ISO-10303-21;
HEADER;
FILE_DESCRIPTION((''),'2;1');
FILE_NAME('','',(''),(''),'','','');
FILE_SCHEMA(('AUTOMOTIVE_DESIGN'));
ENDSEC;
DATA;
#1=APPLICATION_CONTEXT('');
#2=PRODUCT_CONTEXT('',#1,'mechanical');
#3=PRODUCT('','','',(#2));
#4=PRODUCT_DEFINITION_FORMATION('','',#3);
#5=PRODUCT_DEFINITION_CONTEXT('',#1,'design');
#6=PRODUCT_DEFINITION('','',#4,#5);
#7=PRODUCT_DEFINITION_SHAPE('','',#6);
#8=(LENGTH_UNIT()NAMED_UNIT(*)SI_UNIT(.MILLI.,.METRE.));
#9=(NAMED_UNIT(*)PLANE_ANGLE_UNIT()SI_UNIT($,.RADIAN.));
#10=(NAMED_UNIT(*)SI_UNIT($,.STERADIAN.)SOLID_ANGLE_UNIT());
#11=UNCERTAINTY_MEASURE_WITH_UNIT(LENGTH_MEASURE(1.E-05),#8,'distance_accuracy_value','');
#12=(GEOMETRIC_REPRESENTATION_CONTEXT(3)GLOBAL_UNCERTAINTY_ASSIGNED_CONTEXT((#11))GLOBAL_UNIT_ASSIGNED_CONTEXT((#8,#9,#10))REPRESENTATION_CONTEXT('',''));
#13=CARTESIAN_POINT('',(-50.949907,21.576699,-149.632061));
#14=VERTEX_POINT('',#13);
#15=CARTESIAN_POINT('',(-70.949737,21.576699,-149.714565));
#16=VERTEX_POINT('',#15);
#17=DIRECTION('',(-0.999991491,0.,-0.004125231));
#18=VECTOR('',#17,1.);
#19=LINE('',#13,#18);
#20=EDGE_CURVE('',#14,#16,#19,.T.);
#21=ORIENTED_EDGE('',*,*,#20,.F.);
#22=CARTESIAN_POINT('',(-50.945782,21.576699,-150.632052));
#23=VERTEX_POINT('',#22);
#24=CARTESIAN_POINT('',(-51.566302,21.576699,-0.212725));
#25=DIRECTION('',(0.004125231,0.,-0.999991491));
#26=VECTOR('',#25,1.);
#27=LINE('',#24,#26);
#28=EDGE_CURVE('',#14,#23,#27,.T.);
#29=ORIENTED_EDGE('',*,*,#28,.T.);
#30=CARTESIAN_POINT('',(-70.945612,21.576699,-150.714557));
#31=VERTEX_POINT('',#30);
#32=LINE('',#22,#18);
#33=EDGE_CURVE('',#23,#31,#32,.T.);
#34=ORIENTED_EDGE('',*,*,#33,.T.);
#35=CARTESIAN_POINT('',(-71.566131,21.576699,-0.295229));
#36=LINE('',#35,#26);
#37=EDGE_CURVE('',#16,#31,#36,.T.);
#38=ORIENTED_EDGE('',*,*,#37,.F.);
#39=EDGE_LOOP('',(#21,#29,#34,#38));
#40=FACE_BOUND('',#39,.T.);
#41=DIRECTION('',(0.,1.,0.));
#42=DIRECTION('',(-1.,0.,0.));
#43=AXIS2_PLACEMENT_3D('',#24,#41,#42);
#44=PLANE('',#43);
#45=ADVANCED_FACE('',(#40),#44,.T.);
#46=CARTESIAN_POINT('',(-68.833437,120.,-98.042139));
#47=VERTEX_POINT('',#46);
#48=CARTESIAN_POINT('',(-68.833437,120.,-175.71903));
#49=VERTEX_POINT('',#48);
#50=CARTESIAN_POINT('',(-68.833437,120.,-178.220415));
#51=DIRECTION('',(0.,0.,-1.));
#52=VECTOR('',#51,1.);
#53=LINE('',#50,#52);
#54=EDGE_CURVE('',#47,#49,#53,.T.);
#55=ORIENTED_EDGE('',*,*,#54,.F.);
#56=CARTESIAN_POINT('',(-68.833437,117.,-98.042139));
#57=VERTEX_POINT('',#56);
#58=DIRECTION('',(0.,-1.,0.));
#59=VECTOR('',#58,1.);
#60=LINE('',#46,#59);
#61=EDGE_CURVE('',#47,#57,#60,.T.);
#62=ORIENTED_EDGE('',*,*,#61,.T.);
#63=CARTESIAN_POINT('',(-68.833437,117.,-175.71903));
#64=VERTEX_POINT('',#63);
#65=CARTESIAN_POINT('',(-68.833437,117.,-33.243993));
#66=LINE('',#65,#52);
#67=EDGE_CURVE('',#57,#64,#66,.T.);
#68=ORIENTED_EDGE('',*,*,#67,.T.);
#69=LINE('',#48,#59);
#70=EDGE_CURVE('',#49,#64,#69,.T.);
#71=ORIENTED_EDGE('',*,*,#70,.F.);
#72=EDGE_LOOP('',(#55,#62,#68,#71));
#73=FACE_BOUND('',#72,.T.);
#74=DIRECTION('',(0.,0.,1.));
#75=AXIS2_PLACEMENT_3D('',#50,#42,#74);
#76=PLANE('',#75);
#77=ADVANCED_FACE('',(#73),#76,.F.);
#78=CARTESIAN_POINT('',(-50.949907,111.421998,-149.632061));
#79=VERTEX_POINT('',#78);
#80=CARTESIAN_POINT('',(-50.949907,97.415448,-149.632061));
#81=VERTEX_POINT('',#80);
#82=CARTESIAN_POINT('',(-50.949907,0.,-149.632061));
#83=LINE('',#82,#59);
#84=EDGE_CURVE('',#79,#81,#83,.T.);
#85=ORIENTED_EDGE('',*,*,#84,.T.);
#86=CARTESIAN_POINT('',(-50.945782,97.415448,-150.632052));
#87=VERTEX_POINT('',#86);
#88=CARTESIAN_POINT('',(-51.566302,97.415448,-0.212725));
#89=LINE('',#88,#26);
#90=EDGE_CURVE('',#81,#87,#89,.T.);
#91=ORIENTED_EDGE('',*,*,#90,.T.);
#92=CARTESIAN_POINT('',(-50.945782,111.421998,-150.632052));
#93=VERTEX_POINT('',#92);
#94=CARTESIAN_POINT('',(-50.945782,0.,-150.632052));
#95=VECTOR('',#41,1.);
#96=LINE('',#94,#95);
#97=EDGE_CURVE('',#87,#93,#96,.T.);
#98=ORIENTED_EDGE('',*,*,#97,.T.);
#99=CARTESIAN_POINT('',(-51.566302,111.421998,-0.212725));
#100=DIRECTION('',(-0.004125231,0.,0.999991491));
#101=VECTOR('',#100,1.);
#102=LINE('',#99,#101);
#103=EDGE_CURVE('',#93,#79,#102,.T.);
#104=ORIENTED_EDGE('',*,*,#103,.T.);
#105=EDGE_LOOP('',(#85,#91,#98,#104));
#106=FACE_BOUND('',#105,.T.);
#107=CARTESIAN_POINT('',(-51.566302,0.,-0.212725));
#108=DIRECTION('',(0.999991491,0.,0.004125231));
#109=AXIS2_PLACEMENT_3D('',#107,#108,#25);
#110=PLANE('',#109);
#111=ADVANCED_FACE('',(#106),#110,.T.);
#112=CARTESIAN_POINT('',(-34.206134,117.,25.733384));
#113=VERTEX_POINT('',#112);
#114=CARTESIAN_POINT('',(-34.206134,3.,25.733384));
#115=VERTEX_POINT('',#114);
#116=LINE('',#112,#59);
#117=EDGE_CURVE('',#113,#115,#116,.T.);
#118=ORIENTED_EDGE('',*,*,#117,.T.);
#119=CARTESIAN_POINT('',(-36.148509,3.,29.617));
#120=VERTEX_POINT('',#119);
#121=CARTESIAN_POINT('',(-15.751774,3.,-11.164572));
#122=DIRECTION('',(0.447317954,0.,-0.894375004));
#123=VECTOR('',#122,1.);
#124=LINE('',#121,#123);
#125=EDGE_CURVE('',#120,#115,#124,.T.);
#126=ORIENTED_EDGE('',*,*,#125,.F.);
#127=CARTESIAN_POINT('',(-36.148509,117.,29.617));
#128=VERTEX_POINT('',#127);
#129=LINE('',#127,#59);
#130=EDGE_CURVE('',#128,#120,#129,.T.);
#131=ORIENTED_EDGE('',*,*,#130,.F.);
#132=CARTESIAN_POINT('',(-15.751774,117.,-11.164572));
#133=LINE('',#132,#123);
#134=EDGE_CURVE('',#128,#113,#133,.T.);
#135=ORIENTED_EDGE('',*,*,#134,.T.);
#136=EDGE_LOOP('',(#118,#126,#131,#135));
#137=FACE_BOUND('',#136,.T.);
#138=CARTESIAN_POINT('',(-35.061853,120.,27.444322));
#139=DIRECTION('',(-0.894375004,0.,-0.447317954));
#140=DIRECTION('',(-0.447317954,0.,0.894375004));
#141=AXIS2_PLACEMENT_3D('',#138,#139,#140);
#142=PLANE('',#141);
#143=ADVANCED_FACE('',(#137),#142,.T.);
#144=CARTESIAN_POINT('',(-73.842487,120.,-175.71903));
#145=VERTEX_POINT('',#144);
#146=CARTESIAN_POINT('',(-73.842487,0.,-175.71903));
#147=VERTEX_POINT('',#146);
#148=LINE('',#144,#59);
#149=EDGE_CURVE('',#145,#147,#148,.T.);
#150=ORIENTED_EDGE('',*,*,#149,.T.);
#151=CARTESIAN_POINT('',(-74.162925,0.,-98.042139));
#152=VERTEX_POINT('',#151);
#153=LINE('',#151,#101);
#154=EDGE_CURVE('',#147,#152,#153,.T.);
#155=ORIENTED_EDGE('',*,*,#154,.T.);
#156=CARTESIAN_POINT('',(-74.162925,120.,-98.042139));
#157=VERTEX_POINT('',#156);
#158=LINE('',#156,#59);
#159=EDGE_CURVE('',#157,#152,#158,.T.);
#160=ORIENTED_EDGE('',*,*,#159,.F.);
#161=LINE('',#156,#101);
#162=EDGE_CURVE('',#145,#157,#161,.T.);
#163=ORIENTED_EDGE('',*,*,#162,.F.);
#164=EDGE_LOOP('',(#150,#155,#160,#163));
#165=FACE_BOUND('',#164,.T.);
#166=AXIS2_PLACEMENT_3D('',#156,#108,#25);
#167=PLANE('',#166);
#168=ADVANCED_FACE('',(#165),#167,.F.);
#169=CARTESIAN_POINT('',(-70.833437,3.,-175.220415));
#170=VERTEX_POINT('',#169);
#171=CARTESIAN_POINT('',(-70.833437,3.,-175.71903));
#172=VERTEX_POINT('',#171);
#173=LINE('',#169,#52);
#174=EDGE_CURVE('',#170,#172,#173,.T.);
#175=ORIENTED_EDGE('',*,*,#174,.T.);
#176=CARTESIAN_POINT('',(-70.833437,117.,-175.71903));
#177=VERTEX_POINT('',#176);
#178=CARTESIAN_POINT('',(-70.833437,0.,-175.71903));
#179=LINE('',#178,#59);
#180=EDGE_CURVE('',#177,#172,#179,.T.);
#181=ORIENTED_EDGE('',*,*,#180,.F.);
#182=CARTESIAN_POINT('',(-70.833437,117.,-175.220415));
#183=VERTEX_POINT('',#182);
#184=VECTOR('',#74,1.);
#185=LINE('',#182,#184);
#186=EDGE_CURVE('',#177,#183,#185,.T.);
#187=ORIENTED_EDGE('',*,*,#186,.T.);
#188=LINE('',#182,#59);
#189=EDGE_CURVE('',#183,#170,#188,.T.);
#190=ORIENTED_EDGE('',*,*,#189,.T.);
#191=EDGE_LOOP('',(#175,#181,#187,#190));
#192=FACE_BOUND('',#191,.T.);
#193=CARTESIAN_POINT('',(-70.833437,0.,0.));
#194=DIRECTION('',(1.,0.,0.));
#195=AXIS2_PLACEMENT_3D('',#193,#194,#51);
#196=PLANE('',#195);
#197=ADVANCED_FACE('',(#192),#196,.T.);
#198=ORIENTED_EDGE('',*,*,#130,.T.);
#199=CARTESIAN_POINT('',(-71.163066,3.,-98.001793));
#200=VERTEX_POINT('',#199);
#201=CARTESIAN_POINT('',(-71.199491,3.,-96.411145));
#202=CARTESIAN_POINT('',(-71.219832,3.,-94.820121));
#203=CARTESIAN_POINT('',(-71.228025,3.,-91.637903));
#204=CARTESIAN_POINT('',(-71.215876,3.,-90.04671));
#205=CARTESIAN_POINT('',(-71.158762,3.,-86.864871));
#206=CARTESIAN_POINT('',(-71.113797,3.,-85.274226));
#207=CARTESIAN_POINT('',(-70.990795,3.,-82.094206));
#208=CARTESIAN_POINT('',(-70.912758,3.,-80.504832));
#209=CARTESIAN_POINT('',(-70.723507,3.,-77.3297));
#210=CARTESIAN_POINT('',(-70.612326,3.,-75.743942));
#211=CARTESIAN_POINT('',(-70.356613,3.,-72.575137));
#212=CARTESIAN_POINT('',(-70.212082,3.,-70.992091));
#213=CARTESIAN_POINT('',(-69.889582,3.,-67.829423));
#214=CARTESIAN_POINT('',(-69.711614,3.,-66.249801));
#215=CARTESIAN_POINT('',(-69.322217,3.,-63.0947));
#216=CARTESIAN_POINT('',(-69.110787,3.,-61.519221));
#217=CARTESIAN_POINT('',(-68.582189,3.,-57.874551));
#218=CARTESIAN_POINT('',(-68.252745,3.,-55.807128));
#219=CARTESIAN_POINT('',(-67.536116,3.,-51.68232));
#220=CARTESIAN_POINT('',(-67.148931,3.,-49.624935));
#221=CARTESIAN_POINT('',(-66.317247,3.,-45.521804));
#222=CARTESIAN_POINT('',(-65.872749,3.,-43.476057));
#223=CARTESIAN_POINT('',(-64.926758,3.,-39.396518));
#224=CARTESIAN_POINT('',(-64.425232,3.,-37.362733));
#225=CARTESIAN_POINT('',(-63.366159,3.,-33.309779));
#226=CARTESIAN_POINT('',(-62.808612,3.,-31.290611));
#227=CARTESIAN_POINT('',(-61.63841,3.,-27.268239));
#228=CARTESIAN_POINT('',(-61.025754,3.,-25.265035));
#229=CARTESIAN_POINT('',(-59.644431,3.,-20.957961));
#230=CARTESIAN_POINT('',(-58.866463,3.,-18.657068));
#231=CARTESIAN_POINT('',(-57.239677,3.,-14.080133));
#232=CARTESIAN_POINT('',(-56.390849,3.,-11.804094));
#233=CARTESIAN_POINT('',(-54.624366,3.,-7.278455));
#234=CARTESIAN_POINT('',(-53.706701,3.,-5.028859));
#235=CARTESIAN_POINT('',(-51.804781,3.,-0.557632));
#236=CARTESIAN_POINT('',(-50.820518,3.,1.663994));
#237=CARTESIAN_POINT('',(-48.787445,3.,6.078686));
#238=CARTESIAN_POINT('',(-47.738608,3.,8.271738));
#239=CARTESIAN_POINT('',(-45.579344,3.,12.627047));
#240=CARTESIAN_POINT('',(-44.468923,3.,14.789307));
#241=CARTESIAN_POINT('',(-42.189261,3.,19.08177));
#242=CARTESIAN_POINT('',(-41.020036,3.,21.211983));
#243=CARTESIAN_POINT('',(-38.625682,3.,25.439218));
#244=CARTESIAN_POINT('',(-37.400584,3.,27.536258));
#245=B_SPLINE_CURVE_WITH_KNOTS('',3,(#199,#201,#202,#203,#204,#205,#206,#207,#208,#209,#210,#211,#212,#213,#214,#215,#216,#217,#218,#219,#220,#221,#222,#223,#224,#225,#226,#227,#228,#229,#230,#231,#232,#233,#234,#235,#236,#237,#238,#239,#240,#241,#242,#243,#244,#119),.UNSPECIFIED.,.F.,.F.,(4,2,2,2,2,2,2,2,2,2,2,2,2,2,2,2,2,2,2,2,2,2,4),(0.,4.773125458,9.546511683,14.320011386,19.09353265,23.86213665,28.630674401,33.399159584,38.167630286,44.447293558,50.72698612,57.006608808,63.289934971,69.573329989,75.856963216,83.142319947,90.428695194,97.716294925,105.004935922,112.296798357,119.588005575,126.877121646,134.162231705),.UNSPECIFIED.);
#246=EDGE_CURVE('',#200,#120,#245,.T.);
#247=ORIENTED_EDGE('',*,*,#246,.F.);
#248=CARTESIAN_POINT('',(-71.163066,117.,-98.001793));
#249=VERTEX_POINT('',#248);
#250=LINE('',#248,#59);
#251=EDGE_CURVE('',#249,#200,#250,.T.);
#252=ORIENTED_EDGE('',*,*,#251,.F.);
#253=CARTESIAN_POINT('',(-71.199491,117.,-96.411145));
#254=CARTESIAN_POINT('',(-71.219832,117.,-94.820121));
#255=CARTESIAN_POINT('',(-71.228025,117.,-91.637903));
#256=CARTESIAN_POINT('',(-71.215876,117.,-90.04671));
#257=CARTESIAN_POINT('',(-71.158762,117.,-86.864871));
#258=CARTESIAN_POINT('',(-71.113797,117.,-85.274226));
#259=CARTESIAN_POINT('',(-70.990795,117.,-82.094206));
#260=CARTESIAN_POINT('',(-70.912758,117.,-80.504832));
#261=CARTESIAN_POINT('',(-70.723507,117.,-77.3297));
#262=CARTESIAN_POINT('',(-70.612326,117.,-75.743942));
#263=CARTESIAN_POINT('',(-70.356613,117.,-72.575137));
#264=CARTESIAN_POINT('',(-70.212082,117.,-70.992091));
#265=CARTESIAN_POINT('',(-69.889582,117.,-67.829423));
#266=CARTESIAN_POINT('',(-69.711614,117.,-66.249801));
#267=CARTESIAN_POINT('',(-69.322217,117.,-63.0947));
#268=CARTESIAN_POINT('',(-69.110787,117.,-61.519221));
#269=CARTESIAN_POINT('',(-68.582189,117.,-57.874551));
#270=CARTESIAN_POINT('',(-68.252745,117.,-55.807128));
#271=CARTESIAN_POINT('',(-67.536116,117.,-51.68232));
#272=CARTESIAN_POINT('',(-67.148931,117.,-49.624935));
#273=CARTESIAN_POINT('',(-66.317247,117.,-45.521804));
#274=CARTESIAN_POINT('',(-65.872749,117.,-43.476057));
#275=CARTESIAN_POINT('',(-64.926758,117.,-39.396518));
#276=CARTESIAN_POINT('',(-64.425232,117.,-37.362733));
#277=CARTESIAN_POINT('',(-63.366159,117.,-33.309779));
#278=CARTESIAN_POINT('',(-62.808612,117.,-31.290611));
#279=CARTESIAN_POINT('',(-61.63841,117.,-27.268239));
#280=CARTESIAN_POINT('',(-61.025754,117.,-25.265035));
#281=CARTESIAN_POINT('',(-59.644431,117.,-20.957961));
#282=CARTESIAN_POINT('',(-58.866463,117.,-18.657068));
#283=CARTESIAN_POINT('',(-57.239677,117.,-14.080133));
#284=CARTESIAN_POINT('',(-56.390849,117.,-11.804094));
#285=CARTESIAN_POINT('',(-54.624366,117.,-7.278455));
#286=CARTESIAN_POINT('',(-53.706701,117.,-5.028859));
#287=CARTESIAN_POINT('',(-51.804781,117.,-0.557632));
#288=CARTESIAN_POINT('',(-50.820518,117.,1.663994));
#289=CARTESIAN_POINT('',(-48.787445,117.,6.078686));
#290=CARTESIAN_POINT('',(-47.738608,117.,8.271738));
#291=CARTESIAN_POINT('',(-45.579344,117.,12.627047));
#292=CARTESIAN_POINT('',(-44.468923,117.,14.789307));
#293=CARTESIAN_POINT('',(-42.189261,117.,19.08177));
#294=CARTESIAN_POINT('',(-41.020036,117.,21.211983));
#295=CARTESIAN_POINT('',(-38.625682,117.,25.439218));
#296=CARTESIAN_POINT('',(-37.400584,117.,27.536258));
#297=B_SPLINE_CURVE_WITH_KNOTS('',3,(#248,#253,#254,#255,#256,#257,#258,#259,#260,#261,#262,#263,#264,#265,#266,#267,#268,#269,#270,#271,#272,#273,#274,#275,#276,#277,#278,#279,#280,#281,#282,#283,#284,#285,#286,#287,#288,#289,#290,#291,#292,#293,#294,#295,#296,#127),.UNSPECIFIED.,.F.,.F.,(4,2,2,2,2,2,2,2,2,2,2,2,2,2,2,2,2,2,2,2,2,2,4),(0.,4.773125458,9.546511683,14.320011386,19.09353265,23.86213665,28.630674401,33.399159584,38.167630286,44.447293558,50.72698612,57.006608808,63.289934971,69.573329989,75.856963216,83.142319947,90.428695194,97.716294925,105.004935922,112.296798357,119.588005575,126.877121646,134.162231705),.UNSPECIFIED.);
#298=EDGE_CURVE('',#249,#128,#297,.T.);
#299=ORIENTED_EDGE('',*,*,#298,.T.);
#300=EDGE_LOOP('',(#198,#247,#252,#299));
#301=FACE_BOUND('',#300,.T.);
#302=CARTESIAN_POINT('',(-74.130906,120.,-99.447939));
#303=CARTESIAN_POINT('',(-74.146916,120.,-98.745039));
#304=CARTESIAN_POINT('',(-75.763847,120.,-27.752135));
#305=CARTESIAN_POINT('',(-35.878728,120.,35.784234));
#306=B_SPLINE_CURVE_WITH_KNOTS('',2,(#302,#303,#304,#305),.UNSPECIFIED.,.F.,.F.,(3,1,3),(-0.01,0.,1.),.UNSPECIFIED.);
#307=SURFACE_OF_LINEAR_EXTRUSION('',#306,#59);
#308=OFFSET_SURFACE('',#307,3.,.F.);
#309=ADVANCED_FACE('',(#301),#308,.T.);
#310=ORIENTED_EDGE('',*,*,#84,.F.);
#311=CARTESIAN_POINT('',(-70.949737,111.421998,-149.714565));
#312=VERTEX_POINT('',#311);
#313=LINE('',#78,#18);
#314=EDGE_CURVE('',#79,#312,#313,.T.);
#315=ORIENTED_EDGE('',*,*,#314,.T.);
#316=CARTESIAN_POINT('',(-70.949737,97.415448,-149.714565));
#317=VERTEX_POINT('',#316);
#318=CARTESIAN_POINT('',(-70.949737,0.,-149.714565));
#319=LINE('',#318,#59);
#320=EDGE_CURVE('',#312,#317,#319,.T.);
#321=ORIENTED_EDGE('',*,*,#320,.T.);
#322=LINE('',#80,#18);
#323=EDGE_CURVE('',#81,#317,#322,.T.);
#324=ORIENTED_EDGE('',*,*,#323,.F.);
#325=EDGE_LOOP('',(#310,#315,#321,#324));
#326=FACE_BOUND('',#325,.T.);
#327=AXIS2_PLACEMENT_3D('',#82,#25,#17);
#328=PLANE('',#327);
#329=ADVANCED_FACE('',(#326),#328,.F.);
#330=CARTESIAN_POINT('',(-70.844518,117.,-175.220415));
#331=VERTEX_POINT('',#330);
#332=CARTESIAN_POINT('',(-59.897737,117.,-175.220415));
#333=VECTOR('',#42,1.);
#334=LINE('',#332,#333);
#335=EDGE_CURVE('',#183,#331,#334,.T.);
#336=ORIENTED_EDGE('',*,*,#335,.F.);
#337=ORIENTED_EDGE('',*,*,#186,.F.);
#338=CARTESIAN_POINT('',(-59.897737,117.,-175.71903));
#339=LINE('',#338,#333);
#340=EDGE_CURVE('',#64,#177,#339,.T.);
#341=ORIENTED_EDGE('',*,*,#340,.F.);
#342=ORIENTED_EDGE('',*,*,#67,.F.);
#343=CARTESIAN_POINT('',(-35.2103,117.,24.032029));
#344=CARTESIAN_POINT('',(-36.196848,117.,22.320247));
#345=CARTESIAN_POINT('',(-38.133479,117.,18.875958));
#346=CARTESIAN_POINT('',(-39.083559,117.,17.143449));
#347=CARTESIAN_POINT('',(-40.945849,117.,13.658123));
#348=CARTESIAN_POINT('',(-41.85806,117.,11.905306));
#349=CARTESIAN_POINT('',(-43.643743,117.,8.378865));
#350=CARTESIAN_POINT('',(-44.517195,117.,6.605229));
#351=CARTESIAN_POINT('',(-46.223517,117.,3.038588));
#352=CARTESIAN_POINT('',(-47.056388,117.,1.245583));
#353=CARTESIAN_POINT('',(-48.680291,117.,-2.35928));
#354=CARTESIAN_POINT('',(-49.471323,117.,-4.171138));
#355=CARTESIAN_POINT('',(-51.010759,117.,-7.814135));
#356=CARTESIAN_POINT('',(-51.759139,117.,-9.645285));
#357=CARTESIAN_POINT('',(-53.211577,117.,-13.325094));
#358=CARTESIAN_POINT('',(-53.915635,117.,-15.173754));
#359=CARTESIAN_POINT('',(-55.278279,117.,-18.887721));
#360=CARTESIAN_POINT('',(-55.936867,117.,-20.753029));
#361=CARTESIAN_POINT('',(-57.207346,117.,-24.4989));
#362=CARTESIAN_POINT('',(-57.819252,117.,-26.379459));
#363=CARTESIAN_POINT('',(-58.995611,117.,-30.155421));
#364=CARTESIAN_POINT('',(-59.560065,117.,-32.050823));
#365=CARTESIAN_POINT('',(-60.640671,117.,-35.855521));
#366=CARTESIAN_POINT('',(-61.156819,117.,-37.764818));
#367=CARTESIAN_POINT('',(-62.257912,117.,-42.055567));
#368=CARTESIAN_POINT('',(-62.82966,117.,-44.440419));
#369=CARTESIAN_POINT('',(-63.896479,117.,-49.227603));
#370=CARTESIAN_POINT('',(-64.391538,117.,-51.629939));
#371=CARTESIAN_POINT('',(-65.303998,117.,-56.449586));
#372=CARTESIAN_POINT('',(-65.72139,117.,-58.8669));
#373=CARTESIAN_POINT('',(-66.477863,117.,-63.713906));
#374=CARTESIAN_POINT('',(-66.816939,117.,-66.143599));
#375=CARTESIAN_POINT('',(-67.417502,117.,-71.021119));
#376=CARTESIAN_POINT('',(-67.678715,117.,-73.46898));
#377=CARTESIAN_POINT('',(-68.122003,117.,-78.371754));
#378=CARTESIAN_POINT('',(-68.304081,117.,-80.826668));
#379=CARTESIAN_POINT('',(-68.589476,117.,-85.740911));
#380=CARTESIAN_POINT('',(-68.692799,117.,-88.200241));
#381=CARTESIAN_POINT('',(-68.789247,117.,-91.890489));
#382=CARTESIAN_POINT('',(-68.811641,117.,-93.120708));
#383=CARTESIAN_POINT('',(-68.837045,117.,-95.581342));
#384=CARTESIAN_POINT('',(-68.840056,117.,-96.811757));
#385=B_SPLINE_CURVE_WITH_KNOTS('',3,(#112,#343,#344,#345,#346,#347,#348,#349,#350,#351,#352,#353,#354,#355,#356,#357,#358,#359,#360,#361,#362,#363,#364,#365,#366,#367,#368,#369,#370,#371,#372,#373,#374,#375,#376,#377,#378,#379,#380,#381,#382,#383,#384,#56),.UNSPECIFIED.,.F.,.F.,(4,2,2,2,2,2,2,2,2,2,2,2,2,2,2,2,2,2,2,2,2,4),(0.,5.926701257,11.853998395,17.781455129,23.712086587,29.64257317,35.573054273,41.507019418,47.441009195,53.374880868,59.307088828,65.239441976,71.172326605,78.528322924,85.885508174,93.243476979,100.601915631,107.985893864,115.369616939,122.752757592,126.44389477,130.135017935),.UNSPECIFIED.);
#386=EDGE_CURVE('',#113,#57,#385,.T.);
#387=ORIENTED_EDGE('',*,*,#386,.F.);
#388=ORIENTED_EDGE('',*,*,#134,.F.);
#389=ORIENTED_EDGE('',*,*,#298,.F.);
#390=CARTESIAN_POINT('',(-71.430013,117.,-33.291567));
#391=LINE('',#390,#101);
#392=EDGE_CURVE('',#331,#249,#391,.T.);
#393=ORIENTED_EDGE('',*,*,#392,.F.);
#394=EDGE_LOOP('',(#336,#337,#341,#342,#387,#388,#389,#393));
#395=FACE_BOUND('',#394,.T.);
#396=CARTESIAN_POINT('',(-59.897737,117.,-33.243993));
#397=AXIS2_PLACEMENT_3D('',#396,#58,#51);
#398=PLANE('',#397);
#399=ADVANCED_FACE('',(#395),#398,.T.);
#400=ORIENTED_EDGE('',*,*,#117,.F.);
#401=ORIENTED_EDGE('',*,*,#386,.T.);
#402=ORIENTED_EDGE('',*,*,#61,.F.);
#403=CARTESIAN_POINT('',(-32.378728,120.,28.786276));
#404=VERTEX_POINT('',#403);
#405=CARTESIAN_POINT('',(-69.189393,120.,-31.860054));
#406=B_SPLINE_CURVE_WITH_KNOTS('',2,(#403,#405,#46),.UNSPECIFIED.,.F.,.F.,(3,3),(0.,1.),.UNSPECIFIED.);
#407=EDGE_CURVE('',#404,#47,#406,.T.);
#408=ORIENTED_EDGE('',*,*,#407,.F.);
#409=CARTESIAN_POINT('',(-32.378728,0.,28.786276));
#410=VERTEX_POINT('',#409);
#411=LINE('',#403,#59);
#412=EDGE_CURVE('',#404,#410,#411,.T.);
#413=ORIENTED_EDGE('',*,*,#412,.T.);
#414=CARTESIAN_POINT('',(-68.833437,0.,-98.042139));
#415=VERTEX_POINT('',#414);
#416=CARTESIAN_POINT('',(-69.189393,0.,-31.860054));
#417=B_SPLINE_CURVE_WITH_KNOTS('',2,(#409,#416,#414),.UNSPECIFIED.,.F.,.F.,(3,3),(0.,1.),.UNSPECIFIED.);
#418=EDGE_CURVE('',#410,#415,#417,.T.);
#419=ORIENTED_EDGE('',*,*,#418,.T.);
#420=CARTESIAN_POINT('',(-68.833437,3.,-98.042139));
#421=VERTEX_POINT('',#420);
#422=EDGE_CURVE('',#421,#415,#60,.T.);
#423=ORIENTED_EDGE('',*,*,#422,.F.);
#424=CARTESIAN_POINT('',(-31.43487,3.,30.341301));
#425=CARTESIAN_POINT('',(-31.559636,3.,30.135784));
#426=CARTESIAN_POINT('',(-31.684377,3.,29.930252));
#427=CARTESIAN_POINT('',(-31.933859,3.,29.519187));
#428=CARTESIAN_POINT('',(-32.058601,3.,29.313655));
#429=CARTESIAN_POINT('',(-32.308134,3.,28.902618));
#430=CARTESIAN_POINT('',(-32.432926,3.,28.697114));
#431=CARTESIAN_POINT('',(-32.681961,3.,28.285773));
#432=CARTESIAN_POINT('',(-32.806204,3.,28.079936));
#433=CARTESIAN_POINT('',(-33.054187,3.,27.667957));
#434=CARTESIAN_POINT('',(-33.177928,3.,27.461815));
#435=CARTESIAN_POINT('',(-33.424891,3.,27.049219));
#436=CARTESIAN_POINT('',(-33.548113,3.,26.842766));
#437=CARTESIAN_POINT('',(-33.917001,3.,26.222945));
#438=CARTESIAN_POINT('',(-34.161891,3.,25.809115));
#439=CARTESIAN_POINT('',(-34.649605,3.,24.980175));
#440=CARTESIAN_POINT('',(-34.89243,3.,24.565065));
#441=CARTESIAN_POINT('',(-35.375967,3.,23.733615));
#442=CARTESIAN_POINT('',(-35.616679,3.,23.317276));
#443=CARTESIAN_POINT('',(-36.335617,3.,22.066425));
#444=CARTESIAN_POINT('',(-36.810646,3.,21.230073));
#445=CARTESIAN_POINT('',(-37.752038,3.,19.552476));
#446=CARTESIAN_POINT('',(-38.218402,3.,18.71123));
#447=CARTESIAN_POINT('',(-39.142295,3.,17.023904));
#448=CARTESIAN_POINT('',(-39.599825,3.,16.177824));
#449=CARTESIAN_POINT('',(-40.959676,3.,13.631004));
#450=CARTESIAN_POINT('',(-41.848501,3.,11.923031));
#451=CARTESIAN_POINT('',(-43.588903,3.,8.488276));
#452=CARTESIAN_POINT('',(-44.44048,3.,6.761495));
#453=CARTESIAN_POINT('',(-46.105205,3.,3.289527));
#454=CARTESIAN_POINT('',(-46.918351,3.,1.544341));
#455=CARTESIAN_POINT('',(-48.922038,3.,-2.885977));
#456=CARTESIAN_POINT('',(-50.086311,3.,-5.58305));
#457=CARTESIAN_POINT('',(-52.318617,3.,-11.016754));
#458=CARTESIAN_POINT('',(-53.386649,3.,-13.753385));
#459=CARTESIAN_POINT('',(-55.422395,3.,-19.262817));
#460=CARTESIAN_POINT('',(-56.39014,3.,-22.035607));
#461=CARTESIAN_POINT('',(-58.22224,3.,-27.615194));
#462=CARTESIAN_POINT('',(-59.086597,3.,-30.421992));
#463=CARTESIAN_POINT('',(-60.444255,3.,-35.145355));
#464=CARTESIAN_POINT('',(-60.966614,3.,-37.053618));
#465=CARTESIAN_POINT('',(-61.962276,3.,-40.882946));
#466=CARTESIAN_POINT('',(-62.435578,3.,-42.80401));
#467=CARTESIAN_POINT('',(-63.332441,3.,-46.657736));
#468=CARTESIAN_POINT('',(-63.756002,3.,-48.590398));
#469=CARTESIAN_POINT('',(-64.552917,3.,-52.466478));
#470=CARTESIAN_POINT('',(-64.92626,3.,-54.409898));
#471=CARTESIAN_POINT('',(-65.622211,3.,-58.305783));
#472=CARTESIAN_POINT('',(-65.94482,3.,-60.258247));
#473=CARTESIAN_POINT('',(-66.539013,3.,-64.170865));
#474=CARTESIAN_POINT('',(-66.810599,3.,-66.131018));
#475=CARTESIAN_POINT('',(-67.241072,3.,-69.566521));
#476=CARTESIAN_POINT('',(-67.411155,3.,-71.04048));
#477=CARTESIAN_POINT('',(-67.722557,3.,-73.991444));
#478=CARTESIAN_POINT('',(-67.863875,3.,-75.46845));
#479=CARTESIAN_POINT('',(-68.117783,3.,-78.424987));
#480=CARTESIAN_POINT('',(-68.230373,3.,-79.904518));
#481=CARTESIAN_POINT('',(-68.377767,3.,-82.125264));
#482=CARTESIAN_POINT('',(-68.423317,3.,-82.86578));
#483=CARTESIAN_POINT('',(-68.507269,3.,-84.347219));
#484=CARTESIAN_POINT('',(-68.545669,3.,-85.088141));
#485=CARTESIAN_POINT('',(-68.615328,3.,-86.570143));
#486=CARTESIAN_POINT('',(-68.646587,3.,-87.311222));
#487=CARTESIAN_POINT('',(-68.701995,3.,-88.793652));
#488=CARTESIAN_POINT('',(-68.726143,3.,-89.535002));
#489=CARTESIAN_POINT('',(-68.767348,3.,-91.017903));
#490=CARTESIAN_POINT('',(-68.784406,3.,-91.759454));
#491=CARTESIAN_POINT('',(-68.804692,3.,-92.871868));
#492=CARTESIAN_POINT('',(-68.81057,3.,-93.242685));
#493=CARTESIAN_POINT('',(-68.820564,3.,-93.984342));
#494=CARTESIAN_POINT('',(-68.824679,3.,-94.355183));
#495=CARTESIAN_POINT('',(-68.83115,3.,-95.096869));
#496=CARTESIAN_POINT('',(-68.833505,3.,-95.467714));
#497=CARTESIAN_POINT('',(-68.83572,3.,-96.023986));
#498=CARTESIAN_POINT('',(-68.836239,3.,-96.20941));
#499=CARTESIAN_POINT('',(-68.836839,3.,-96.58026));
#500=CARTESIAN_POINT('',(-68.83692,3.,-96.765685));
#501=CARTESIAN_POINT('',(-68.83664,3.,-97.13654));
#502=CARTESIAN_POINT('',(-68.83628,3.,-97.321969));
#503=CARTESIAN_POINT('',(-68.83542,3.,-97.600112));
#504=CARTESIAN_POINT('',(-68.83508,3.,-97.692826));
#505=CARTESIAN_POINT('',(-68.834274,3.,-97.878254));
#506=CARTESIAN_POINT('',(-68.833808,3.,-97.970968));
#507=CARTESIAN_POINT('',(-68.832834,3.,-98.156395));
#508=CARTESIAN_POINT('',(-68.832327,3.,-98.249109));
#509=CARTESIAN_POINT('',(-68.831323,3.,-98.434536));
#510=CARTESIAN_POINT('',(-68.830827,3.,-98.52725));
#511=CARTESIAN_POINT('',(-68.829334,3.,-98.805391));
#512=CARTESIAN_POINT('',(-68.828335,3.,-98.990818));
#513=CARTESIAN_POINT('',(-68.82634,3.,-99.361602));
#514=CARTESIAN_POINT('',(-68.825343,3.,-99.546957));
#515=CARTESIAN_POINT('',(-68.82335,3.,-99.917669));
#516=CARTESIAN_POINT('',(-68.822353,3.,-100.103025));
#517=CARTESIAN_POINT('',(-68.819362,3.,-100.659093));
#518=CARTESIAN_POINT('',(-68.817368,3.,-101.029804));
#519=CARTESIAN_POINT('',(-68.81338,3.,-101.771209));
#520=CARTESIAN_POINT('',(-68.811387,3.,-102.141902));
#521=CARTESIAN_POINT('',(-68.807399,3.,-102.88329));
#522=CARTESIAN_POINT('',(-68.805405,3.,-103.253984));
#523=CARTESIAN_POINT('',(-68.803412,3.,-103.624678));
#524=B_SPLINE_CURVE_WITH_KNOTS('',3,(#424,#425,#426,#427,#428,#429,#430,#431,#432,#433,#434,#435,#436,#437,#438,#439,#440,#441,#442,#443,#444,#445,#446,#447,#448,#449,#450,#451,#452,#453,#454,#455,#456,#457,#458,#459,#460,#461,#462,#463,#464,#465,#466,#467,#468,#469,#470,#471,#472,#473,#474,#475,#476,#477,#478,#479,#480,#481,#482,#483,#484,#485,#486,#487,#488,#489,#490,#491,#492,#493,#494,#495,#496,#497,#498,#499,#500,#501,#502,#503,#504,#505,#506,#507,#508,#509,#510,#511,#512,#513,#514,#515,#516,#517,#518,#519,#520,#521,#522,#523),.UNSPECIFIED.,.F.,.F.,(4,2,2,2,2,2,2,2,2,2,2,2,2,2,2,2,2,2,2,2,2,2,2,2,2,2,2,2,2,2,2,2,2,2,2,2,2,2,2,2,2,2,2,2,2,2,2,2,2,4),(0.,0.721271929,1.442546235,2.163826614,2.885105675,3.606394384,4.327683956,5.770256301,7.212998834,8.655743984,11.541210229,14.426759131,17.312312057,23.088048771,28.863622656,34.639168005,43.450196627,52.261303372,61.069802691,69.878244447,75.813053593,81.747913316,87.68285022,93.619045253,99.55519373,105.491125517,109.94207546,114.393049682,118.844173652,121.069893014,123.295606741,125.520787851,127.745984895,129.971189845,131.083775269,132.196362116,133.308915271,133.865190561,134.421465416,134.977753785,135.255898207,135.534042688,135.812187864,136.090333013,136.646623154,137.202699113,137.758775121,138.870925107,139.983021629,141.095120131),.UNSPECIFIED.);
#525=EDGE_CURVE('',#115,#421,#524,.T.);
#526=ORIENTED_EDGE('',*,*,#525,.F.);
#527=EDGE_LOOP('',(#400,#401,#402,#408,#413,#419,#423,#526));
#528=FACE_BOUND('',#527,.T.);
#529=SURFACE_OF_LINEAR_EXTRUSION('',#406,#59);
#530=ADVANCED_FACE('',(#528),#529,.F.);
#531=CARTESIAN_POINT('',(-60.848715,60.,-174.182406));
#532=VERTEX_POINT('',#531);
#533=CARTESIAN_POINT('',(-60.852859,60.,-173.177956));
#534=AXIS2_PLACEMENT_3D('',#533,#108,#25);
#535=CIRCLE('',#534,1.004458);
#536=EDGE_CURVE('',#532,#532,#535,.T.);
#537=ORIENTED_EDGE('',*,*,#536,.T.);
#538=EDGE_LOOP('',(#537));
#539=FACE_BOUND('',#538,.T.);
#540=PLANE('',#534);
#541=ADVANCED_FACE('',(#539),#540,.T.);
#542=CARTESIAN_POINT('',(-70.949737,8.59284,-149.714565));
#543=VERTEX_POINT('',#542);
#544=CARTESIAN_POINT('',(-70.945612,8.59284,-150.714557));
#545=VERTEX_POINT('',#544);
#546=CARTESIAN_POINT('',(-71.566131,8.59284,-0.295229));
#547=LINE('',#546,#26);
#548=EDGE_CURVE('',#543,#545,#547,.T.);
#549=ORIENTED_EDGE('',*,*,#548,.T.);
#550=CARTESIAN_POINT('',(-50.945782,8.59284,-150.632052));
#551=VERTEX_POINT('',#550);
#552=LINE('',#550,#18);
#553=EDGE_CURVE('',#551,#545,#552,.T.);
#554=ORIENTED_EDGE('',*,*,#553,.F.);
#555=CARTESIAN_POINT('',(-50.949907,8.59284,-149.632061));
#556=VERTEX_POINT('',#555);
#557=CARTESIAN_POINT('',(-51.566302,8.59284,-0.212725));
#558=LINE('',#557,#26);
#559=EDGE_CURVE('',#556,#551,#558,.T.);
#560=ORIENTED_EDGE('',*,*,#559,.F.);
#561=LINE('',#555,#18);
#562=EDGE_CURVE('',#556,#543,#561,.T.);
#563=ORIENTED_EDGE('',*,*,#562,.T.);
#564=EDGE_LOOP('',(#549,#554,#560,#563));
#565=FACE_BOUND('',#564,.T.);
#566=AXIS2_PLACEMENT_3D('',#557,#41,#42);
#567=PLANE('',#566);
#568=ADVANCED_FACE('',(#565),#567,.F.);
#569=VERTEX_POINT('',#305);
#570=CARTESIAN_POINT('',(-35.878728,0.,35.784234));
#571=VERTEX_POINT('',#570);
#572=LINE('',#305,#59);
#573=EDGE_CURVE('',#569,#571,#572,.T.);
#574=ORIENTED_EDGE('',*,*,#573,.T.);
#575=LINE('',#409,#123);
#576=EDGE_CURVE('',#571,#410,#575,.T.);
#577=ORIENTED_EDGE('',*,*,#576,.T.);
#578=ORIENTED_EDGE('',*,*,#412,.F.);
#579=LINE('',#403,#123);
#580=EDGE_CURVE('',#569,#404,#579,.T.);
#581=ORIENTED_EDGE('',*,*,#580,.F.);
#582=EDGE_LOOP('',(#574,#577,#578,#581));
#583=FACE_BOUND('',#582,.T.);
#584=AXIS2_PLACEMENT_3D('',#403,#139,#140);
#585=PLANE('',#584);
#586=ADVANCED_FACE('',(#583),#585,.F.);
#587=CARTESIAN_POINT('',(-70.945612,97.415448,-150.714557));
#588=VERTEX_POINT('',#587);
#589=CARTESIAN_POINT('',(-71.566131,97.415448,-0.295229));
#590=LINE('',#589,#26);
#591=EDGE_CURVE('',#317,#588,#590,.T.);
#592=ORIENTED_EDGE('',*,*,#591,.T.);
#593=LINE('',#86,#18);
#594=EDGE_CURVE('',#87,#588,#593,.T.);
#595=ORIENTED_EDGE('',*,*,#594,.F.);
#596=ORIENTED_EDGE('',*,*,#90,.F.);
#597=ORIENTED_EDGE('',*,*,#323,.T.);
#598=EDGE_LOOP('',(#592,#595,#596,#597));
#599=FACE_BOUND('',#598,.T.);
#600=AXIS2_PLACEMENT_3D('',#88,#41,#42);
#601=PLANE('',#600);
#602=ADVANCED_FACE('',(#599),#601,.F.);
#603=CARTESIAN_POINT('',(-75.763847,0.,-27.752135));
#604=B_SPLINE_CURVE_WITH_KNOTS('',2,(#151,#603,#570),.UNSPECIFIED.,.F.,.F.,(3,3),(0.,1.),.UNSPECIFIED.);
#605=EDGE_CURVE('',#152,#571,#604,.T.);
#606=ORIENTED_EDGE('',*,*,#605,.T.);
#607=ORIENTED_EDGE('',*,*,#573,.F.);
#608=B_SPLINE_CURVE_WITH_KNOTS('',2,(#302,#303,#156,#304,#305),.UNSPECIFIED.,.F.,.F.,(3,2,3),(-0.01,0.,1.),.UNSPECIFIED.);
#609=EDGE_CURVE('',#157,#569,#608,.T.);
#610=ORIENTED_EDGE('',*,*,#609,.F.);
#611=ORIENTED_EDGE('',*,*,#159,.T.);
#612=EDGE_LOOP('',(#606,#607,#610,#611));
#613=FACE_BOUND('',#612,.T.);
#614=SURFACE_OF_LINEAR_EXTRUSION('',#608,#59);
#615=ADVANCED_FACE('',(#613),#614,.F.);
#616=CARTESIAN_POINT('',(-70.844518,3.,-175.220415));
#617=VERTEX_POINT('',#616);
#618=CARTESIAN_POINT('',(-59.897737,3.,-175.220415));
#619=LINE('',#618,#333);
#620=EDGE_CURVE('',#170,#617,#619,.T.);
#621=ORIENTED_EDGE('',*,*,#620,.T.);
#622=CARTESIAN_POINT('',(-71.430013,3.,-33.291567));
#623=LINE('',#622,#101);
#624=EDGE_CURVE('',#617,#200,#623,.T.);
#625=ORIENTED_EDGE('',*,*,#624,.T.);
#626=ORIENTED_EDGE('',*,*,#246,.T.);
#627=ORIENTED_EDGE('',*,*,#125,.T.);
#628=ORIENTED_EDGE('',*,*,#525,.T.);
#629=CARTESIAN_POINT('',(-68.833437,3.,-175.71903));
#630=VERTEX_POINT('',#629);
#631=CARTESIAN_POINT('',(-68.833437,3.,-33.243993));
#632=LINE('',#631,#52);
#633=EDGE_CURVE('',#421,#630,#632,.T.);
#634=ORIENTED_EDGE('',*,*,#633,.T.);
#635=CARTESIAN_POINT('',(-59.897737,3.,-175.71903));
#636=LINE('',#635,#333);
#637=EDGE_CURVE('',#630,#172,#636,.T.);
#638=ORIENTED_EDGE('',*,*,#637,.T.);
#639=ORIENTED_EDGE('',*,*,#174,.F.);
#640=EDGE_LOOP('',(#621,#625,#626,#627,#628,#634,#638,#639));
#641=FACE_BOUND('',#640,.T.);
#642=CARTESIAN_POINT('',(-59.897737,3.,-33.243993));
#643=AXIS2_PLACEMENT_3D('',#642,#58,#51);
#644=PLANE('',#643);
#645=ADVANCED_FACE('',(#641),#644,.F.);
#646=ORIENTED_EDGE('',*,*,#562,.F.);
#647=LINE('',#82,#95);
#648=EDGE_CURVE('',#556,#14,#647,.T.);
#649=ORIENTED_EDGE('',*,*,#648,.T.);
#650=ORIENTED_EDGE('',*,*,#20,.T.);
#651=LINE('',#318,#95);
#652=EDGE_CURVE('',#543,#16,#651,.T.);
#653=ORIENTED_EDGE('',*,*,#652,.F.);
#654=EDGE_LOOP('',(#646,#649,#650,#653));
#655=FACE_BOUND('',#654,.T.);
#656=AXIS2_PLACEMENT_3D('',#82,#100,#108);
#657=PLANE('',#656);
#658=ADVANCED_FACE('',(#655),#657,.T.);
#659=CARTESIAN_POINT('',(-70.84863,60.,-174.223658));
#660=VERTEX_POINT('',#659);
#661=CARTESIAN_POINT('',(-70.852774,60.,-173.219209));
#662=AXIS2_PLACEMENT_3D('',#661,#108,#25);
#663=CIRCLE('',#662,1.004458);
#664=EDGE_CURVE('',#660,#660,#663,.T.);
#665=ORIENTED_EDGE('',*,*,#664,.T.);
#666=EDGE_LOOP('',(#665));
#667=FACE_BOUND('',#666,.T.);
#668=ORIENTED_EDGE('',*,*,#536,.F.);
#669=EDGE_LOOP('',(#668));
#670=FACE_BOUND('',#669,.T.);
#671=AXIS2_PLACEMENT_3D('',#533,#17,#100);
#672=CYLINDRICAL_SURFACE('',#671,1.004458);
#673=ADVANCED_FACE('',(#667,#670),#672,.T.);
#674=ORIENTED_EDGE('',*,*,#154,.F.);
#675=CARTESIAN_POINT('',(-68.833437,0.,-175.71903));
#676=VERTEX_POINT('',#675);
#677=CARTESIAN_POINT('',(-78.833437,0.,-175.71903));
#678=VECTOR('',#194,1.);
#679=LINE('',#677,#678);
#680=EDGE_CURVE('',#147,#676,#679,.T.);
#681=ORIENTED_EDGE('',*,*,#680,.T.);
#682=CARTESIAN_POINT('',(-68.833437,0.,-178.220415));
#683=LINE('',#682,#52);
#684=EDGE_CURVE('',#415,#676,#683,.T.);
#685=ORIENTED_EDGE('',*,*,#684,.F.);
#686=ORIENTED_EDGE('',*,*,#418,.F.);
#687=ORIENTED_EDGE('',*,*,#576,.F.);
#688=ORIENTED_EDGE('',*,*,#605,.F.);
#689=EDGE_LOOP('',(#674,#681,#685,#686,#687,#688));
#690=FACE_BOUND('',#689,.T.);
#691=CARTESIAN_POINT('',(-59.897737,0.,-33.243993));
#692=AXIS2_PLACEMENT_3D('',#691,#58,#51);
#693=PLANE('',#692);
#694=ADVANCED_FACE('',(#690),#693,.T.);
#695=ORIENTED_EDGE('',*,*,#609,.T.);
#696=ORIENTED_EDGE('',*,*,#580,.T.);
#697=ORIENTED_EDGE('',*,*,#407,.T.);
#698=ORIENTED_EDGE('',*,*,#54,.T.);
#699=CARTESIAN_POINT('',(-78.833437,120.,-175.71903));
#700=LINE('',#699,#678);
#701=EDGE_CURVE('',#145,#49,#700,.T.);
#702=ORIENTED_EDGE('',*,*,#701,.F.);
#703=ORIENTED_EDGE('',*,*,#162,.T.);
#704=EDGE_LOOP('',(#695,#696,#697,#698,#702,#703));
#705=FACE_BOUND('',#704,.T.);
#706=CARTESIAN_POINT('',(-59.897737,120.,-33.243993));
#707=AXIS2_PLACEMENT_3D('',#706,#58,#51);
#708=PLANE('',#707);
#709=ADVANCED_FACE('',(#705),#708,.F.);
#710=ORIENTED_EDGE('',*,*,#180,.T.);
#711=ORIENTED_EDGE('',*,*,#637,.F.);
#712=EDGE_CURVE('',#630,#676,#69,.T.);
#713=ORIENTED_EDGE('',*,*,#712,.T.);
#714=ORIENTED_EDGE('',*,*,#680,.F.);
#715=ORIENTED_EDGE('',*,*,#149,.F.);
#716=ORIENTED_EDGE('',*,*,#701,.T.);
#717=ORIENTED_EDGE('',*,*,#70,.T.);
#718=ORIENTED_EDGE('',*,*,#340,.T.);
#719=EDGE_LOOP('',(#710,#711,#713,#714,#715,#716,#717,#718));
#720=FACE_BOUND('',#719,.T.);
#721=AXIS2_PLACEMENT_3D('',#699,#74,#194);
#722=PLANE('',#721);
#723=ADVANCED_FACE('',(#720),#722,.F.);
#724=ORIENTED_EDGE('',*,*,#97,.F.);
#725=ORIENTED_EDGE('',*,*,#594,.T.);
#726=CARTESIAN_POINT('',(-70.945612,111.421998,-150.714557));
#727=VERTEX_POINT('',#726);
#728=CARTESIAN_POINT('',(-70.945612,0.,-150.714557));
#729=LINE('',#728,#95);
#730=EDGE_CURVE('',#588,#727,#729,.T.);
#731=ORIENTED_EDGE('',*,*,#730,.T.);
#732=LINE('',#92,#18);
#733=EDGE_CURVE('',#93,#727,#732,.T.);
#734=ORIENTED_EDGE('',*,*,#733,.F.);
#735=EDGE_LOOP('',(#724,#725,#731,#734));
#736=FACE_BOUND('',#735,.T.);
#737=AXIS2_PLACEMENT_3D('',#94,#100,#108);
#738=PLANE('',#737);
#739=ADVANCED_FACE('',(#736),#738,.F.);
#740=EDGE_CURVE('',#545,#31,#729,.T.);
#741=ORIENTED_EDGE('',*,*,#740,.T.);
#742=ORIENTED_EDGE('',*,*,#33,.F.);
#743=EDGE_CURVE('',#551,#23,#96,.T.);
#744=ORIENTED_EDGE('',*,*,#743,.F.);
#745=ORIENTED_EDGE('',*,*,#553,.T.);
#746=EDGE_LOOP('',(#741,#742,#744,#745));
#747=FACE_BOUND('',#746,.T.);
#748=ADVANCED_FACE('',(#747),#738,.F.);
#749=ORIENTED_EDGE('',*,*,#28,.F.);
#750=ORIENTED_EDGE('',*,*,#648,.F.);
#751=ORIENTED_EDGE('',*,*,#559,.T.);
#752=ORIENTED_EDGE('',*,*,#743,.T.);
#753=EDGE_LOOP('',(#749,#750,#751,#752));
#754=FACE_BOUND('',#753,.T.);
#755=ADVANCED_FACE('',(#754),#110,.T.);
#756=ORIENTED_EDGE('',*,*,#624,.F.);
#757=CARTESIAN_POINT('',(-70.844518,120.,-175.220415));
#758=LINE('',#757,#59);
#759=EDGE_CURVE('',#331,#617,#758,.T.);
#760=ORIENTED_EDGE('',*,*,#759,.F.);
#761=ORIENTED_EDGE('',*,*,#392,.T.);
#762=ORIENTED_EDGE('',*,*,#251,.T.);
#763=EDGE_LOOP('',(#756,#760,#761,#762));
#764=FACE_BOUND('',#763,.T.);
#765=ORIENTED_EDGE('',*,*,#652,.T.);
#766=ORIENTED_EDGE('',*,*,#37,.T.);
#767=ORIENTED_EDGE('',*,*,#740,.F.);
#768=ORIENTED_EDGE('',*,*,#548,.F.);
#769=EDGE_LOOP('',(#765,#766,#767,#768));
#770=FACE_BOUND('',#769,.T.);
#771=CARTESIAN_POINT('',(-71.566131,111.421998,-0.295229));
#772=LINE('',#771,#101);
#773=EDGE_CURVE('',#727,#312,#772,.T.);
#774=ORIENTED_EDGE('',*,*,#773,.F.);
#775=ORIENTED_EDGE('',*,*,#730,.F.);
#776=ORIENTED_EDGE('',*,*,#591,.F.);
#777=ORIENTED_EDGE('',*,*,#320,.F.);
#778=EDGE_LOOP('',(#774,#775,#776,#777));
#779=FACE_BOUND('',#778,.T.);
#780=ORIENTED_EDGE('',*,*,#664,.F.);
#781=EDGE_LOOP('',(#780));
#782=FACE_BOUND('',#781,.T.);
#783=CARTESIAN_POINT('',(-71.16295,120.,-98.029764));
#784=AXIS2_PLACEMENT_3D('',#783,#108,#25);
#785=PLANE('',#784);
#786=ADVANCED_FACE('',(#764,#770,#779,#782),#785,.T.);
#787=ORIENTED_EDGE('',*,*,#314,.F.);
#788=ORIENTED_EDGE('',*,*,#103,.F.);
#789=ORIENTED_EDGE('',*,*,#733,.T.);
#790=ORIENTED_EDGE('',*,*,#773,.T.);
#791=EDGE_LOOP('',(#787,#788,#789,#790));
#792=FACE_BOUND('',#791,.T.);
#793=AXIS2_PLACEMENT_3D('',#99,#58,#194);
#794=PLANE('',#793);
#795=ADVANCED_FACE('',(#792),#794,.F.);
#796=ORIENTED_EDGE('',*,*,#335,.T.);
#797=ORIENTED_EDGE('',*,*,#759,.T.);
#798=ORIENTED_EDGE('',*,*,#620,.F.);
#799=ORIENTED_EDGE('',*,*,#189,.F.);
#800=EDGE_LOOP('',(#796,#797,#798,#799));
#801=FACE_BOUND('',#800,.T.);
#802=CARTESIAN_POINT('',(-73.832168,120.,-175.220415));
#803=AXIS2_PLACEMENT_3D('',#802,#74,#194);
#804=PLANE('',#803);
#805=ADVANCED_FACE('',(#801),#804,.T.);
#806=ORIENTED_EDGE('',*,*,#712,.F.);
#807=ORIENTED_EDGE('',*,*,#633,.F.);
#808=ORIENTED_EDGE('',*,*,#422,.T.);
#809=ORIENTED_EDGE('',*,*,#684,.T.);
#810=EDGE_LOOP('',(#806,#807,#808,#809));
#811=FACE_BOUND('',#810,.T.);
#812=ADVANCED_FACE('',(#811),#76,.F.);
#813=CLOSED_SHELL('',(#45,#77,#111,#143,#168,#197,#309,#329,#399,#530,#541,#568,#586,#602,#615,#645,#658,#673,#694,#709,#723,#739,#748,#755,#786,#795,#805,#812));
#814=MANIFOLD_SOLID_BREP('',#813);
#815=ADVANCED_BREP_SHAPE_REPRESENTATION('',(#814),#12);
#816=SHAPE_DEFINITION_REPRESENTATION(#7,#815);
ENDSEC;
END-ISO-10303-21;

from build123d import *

# Parameters (mm, degrees)
BOSS_EXTRUDE1_DEPTH = 120
SHELL4_START        = 3
SHELL4_DEPTH        = 114
SKETCH12_W          = 3.498967662
SKETCH12_H          = 114
CUT_EXTRUDE5_DEPTH  = 2
SKETCH9_R           = 1.004458273
BOSS_EXTRUDE5_DEPTH = 10
CUT_EXTRUDE6_DEPTH  = 10
SKETCH14_W          = 1
SKETCH14_H          = 12.98385937
SKETCH14_H_2        = 14.006550136
BOSS_EXTRUDE6_DEPTH = 20


# Read off the part's stored shape, not the designer's step: Shell4
with BuildPart() as part:
    # Sketch1 → Boss-Extrude1 (new body)
    with BuildSketch(Plane(origin=(0, 0, 0), x_dir=(1, 0, 0), z_dir=(0, 1, 0))):
        with BuildLine():
            Line((-74.162924852, 98.042139327), (-73.832168128, 178.220414973))
            Line((-73.832168128, 178.220414973), (-68.833436902, 178.220414973))
            Line((-68.833436902, 178.220414973), (-68.833436902, 98.042139327))
            add(Edge.make_bspline(
                [(-68.833436902, 98.042139327), (-69.18939253, 31.860054141), (-32.378727908, -28.786275828)],
                knots=[0, 0, 0, 1, 1, 1], degree=2))
            Line((-32.378727908, -28.786275828), (-35.878727908, -35.78423441))
            add(Edge.make_bspline(
                [(-74.162924852, 98.042139327), (-75.763847477, 27.752135338), (-35.878727908, -35.78423441)],
                knots=[0, 0, 0, 1, 1, 1], degree=2))
        make_face()
    extrude(amount=BOSS_EXTRUDE1_DEPTH)

    # Shell4 outline → Shell4 (cut)
    with BuildSketch(Plane(origin=(0, 0, 0), x_dir=(1, 0, 0), z_dir=(0, 1, 0)).offset(SHELL4_START)):
        with BuildLine():
            Line((-70.8445184, 175.220414973), (-71.163065765, 98.001792885))
            add(Edge.make_bspline(
                [(-71.163065765, 98.001792885), (-71.16307999, 98.001168327), (-71.163094215, 98.000543769), (-71.16310844, 97.999919211), (-71.163122665, 97.999294653), (-71.16313689, 97.998670095), (-71.163151114, 97.998045537), (-71.163165339, 97.997420979), (-71.163179564, 97.996796421), (-71.163193789, 97.996171862), (-71.163208014, 97.995547304), (-71.163222239, 97.994922746), (-71.163236464, 97.994298188), (-71.163250689, 97.99367363), (-71.163293111, 97.991811054), (-71.163321308, 97.990573036), (-71.163349505, 97.989335018), (-71.163377702, 97.988097001), (-71.163405899, 97.986858982), (-71.163434097, 97.985620965), (-71.163462293, 97.984382945), (-71.163490491, 97.98314493), (-71.163518687, 97.98190691), (-71.163546885, 97.980668893), (-71.163575081, 97.979430874), (-71.163603278, 97.978192857), (-71.163631475, 97.976954838), (-71.163673771, 97.975097811), (-71.16368819, 97.974464701), (-71.163699727, 97.973958392), (-71.163723187, 97.972927066), (-71.163717996, 97.973159219), (-71.163755945, 97.971484687), (-71.163749131, 97.971794066), (-71.163775505, 97.970626161), (-71.163784451, 97.97023953), (-71.163799423, 97.969578445), (-71.163813375, 97.968966514), (-71.163827192, 97.968358956), (-71.163841117, 97.967746949), (-71.163868925, 97.96652446), (-71.163882828, 97.965913216), (-71.163896729, 97.965301972), (-71.163910628, 97.964690728), (-71.163924525, 97.964079485), (-71.163938422, 97.963468242), (-71.163952315, 97.962856999), (-71.163966208, 97.962245757), (-71.163980098, 97.961634515), (-71.163993987, 97.961023273), (-71.164007875, 97.960412031), (-71.16402176, 97.95980079), (-71.164035644, 97.959189549), (-71.164105055, 97.956133346), (-71.164160555, 97.953688388), (-71.16421603, 97.951243436), (-71.164271474, 97.948798484), (-71.164326897, 97.946353546), (-71.164382282, 97.943908598), (-71.164437654, 97.941463673), (-71.164492984, 97.939018734), (-71.164548299, 97.936573815), (-71.164603577, 97.93412889), (-71.164658834, 97.931683976), (-71.16471406, 97.929239064), (-71.16476926, 97.926794157), (-71.164934778, 97.919459451), (-71.165045014, 97.914569665), (-71.165155139, 97.909679898), (-71.165265157, 97.904790149), (-71.165375062, 97.899900419), (-71.165484862, 97.895010708), (-71.165594548, 97.890121015), (-71.165704128, 97.885231341), (-71.165813596, 97.880341685), (-71.165922956, 97.875452049), (-71.166032206, 97.87056243), (-71.166141347, 97.86567283), (-71.166250378, 97.860783249), (-71.166577142, 97.846114561), (-71.166794547, 97.83633551), (-71.167011514, 97.826556534), (-71.167228044, 97.816777632), (-71.167444133, 97.806998804), (-71.167659788, 97.797220051), (-71.167875001, 97.787441372), (-71.16808978, 97.777662768), (-71.168304117, 97.767884237), (-71.168518019, 97.758105782), (-71.168731482, 97.7483274), (-71.168944507, 97.738549093), (-71.169157093, 97.72877086), (-71.170217838, 97.679880069), (-71.171059425, 97.640768626), (-71.171894004, 97.601658372), (-71.172721576, 97.56254931), (-71.173542137, 97.523441433), (-71.174355694, 97.484334754), (-71.175162237, 97.445229255), (-71.175961779, 97.406124956), (-71.176754307, 97.367021836), (-71.177539831, 97.327919914), (-71.178318344, 97.288819177), (-71.179089851, 97.249719631), (-71.179854349, 97.210621274), (-71.183641802, 97.015135438), (-71.186559636, 96.858765798), (-71.189365345, 96.702415187), (-71.192058927, 96.546083598), (-71.194640389, 96.389771034), (-71.197109723, 96.233477481), (-71.199466944, 96.077202952), (-71.201712036, 95.920947426), (-71.203845018, 95.764710916), (-71.205865876, 95.608493406), (-71.207774621, 95.452294903), (-71.20957125, 95.296115396), (-71.211255765, 95.139954887), (-71.215972974, 94.671530339), (-71.21866933, 94.359323281), (-71.220917246, 94.047192171), (-71.222716731, 93.735136985), (-71.224067792, 93.423157694), (-71.224970441, 93.111254278), (-71.225424682, 92.799426705), (-71.22543053, 92.487674957), (-71.224987988, 92.175999001), (-71.224097069, 91.864398817), (-71.222757779, 91.552874376), (-71.220970129, 91.241425656), (-71.218734126, 90.930052628), (-71.210681088, 89.996160551), (-71.203519041, 89.373868515), (-71.194563692, 88.751878946), (-71.183815094, 88.130191631), (-71.171273301, 87.508806354), (-71.156938367, 86.887722903), (-71.140810347, 86.266941062), (-71.122889291, 85.646460617), (-71.103175256, 85.026281355), (-71.081668294, 84.406403059), (-71.058368459, 83.786825518), (-71.033275804, 83.167548515), (-71.006390383, 82.548571838), (-70.920355984, 80.692542137), (-70.855828771, 79.456389412), (-70.784130946, 78.221435319), (-70.70526281, 76.987678074), (-70.619224622, 75.75511588), (-70.52601661, 74.52374694), (-70.425638953, 73.293569436), (-70.318091806, 72.064581558), (-70.20337527, 70.836781468), (-70.081489423, 69.610167339), (-69.952434295, 68.384737319), (-69.816209883, 67.16048956), (-69.672816143, 65.937422197), (-69.221126701, 62.271755688), (-68.891322913, 59.832692682), (-68.532840831, 57.398329004), (-68.145679077, 54.968649529), (-67.729835685, 52.543639338), (-67.285308121, 50.123283736), (-66.812093252, 47.707568223), (-66.310187385, 45.296478532), (-65.779586225, 42.890000586), (-65.220284915, 40.488120539), (-64.632278003, 38.090824743), (-64.015559465, 35.698099773), (-63.370122691, 33.309932408), (-61.444530757, 26.501652756), (-60.094120868, 22.092657129), (-58.644686559, 17.699242409), (-57.096177659, 13.321333259), (-55.448539032, 8.958860031), (-53.701711499, 4.611759301), (-51.855632693, 0.279974273), (-49.910237914, -4.036544954), (-47.865460912, -8.33784126), (-45.721234657, -12.6239505), (-43.477492061, -16.894901644), (-41.134166666, -21.150717052), (-38.691193295, -25.391412877), (-36.148508666, -29.616999611)],
                knots=[-0.000198917, -0.000198917, -0.000198917, -0.000198917, -0.000198917, -0.000198917, -0.000198917, -0.000198917, -0.000198917, -0.000198917, -0.000198917, -0.000198917, -0.000198917, -0.000198917, -0.000198917, -0.000136719, -0.000136719, -0.000136719, -0.000136719, -0.000136719, -0.000136719, -0.000136719, -0.000136719, -0.000136719, -0.000136719, -0.000136719, -0.000136719, -0.000136719, -1.3428e-05, -1.3428e-05, -1.3428e-05, -1.3428e-05, -1.3428e-05, -1.3428e-05, -1.3428e-05, -1.3428e-05, -1.3428e-05, -1.3428e-05, -1.3428e-05, -1.3428e-05, -1.3428e-05, 4.8218e-05, 4.8218e-05, 4.8218e-05, 4.8218e-05, 4.8218e-05, 4.8218e-05, 4.8218e-05, 4.8218e-05, 4.8218e-05, 4.8218e-05, 4.8218e-05, 4.8218e-05, 4.8218e-05, 0.000109863, 0.000109863, 0.000109863, 0.000109863, 0.000109863, 0.000109863, 0.000109863, 0.000109863, 0.000109863, 0.000109863, 0.000109863, 0.000109863, 0.000109863, 0.000356445, 0.000356445, 0.000356445, 0.000356445, 0.000356445, 0.000356445, 0.000356445, 0.000356445, 0.000356445, 0.000356445, 0.000356445, 0.000356445, 0.000356445, 0.000849609, 0.000849609, 0.000849609, 0.000849609, 0.000849609, 0.000849609, 0.000849609, 0.000849609, 0.000849609, 0.000849609, 0.000849609, 0.000849609, 0.000849609, 0.001835937, 0.001835937, 0.001835937, 0.001835937, 0.001835937, 0.001835937, 0.001835937, 0.001835937, 0.001835937, 0.001835937, 0.001835937, 0.001835937, 0.001835937, 0.00578125, 0.00578125, 0.00578125, 0.00578125, 0.00578125, 0.00578125, 0.00578125, 0.00578125, 0.00578125, 0.00578125, 0.00578125, 0.00578125, 0.00578125, 0.0215625, 0.0215625, 0.0215625, 0.0215625, 0.0215625, 0.0215625, 0.0215625, 0.0215625, 0.0215625, 0.0215625, 0.0215625, 0.0215625, 0.0215625, 0.053125, 0.053125, 0.053125, 0.053125, 0.053125, 0.053125, 0.053125, 0.053125, 0.053125, 0.053125, 0.053125, 0.053125, 0.053125, 0.11625, 0.11625, 0.11625, 0.11625, 0.11625, 0.11625, 0.11625, 0.11625, 0.11625, 0.11625, 0.11625, 0.11625, 0.11625, 0.2425, 0.2425, 0.2425, 0.2425, 0.2425, 0.2425, 0.2425, 0.2425, 0.2425, 0.2425, 0.2425, 0.2425, 0.2425, 0.495, 0.495, 0.495, 0.495, 0.495, 0.495, 0.495, 0.495, 0.495, 0.495, 0.495, 0.495, 0.495, 0.963709177, 0.963709177, 0.963709177, 0.963709177, 0.963709177, 0.963709177, 0.963709177, 0.963709177, 0.963709177, 0.963709177, 0.963709177, 0.963709177, 0.963709177, 0.963709177, 0.963709177], degree=14))
            Line((-36.148508666, -29.616999611), (-34.206134458, -25.733384151))
            add(Edge.make_bspline(
                [(-34.206134458, -25.733384151), (-69.180443526, 33.523923752), (-68.833436902, 98.042139327)],
                knots=[0.025140786, 0.025140786, 0.025140786, 1, 1, 1], degree=2))
            Line((-68.833436902, 98.042139327), (-68.833436902, 175.220414973))
            Line((-68.833436902, 175.220414973), (-70.8445184, 175.220414973))
        make_face()
    extrude(amount=SHELL4_DEPTH, mode=Mode.SUBTRACT)

    # Sketch12 → Cut-Extrude5 (cut)
    with BuildSketch(Plane(origin=(-68.833436902, 0, 0), x_dir=(0, 0, -1), z_dir=(1, 0, 0))):
        with Locations((176.969898804, 60)):
            Rectangle(SKETCH12_W, SKETCH12_H)
    extrude(amount=-CUT_EXTRUDE5_DEPTH, mode=Mode.SUBTRACT)

    # Sketch9 → Boss-Extrude5 (add)
    with BuildSketch(Plane(origin=(-71.566131341, 0, -0.295229336), x_dir=(0.004125231010775818, 0, -0.9999914911983541), z_dir=(0.999991491198354, 0, 0.004125231010775817))):
        with Locations((172.925450661, 60)):
            Circle(SKETCH9_R)
    extrude(amount=BOSS_EXTRUDE5_DEPTH)

    # Sketch13 → Cut-Extrude6 (cut)
    with BuildSketch(Plane(origin=(-68.833436902, 0, 0), x_dir=(0, 0, -1), z_dir=(1, 0, 0))):
        Polygon((178.220414973, 120), (175.719029806, 120), (175.719029806, 0), (178.721352067, 0), (178.721352067, 120), align=None)
    extrude(amount=-CUT_EXTRUDE6_DEPTH, mode=Mode.SUBTRACT)

    # Sketch14 → Boss-Extrude6 (add)
    with BuildSketch(Plane(origin=(-71.566131341, 0, -0.295229336), x_dir=(0.004125231010775816, 0, -0.9999914911983541), z_dir=(0.999991491198354, 0, 0.004125231010775815))):
        with Locations((149.920607502, 15.084769689)):
            Rectangle(SKETCH14_W, SKETCH14_H)
        with Locations((149.920607502, 104.418723374)):
            Rectangle(SKETCH14_W, SKETCH14_H_2)
    extrude(amount=BOSS_EXTRUDE6_DEPTH)


solid = part.part
